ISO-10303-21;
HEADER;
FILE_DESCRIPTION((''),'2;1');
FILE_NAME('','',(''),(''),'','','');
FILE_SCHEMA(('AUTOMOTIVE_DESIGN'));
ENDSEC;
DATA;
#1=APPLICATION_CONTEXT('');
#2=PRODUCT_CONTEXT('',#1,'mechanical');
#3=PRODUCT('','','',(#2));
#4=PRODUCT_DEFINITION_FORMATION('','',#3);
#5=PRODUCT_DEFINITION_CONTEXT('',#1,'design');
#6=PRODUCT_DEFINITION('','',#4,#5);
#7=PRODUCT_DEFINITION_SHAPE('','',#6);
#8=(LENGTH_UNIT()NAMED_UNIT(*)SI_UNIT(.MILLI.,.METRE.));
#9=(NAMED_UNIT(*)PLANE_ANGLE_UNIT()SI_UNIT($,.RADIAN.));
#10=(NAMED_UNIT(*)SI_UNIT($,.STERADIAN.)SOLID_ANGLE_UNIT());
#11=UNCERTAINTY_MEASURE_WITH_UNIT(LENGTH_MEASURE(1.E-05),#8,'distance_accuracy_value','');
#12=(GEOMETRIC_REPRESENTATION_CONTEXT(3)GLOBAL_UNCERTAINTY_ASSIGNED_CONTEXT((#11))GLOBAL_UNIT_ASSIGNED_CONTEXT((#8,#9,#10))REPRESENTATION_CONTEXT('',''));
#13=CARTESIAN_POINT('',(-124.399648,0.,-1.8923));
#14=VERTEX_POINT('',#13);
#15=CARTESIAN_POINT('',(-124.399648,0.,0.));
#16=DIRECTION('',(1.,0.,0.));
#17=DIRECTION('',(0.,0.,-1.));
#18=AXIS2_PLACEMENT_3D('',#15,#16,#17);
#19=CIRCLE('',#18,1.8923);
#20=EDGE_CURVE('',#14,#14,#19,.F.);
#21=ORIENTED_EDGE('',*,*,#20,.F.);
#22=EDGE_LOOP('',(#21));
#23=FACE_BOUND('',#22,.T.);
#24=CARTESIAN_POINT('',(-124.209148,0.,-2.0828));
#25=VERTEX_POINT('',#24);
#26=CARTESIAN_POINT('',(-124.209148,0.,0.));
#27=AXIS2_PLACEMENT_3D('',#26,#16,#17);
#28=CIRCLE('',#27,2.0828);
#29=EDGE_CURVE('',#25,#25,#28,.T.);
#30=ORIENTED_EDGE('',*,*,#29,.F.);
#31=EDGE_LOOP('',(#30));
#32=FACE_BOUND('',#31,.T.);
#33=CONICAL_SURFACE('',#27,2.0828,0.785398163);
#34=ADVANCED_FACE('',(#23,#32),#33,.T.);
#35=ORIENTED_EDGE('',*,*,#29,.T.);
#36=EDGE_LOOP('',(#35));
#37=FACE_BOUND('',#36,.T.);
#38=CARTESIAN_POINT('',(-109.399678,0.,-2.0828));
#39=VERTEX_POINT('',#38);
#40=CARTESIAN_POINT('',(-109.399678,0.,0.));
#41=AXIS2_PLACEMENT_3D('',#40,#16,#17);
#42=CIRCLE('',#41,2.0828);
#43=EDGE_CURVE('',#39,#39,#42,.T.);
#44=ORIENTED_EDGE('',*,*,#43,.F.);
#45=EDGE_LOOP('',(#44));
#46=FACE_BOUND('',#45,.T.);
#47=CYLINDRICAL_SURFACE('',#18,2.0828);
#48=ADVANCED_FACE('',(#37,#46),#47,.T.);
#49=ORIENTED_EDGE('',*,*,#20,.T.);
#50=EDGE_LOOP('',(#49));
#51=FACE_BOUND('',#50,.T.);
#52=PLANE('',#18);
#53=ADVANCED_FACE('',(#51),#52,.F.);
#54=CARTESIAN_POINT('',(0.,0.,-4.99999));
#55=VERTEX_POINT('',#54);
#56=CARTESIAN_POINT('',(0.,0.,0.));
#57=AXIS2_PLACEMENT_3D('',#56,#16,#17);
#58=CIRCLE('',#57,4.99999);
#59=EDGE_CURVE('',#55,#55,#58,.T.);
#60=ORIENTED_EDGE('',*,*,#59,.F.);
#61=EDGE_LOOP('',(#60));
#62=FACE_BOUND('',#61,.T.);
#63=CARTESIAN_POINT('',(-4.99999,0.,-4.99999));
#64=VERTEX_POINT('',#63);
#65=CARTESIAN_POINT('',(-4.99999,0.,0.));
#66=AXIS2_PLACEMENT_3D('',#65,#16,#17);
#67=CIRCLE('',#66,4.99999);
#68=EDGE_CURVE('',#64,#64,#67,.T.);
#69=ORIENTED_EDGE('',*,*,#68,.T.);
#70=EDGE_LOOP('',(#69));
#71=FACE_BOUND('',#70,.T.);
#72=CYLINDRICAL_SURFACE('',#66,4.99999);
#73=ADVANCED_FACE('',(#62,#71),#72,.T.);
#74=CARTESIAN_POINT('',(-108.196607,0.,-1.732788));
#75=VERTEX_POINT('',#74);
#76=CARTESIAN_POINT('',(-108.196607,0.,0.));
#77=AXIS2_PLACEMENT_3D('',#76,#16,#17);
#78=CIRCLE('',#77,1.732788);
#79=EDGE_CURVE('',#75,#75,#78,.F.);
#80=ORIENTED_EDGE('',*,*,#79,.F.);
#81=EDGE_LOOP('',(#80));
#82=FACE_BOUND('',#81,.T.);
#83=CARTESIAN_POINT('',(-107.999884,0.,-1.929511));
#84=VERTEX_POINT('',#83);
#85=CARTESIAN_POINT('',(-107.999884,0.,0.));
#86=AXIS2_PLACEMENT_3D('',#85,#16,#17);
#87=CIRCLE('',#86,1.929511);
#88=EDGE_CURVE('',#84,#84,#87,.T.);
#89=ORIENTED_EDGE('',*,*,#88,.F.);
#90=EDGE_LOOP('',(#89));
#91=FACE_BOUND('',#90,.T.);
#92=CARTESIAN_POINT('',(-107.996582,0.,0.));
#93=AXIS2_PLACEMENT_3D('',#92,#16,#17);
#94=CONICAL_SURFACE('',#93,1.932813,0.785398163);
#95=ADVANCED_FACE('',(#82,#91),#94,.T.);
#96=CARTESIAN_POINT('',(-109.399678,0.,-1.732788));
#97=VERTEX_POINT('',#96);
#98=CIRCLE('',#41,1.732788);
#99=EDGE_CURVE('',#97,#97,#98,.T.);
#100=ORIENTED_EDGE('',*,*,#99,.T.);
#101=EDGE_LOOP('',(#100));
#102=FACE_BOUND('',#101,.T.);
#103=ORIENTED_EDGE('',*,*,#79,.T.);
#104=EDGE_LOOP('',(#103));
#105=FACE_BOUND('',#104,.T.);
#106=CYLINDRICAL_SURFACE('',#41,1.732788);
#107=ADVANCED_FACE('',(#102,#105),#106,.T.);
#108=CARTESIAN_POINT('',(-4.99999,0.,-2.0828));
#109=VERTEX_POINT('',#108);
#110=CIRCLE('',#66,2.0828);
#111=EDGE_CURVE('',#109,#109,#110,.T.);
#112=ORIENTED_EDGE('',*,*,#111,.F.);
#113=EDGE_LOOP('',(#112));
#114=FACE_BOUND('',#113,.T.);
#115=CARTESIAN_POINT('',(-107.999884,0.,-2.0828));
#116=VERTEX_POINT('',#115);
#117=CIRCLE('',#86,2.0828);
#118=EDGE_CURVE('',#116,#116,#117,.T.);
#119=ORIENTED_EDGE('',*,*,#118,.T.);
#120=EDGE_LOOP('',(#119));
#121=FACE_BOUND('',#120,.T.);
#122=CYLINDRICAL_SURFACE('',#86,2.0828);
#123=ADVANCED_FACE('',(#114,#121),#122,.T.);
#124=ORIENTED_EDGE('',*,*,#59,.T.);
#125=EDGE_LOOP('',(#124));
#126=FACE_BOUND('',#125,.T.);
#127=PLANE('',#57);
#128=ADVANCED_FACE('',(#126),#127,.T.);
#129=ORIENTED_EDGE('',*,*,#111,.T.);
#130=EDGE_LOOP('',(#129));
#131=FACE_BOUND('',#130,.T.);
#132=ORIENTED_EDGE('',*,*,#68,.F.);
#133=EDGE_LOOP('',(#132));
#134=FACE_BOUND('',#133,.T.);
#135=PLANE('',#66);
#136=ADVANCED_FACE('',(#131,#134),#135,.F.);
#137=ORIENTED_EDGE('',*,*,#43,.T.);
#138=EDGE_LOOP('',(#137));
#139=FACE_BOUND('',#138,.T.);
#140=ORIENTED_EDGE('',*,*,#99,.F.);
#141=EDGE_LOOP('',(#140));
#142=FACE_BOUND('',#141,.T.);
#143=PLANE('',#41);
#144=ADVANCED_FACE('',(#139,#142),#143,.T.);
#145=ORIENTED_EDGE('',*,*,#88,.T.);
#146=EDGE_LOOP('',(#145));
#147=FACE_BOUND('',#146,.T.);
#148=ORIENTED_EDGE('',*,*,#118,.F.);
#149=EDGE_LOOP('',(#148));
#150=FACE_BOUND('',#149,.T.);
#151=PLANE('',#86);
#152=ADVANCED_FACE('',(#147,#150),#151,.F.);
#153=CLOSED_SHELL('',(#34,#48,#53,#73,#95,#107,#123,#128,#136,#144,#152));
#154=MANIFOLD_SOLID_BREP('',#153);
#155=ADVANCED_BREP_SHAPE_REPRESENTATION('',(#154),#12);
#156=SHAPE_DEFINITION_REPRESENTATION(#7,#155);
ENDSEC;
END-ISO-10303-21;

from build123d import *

# Parameters (mm, degrees)
SKETCH1_R           = 4.99999
SKETCH1_R_2         = 2.182749
SKETCH1_R_3         = 2.0828
SKETCH1_R_4         = 1.932813
SKETCH1_R_5         = 1.732788
BOSS_EXTRUDE2_DEPTH = 4.99999
SKETCH1_5_R         = 2.0828
BOSS_EXTRUDE3_DEPTH = 107.999884076
BOSS_EXTRUDE4_START = -107.999884
SKETCH1_6_R         = 1.932813
BOSS_EXTRUDE4_DEPTH = 0.199898
BOSS_EXTRUDE5_START = -108.199782
SKETCH1_7_R         = 1.732788
BOSS_EXTRUDE5_DEPTH = 1.199896
BOSS_EXTRUDE6_START = -109.399678
SKETCH1_8_R         = 2.0828
BOSS_EXTRUDE6_DEPTH = 14.99997
CHAMFER1_SIZE       = 0.2032
CHAMFER2_SIZE       = 0.1905


with BuildPart() as part:
    # Sketch1 → Boss-Extrude2 (new body)
    # profile 1 of 5: a face of its own
    with BuildSketch(Plane(origin=(0, 0, 0), x_dir=(0, 0, -1), z_dir=(1, 0, 0))):
        Circle(SKETCH1_R)
        Circle(SKETCH1_R_2, mode=Mode.SUBTRACT)
    # profile 2 of 5: a face of its own
    with BuildSketch(Plane(origin=(0, 0, 0), x_dir=(0, 0, -1), z_dir=(1, 0, 0))):
        Circle(SKETCH1_R_2)
        Circle(SKETCH1_R_3, mode=Mode.SUBTRACT)
    # profile 3 of 5: a face of its own
    with BuildSketch(Plane(origin=(0, 0, 0), x_dir=(0, 0, -1), z_dir=(1, 0, 0))):
        Circle(SKETCH1_R_3)
        Circle(SKETCH1_R_4, mode=Mode.SUBTRACT)
    # profile 4 of 5: a face of its own
    with BuildSketch(Plane(origin=(0, 0, 0), x_dir=(0, 0, -1), z_dir=(1, 0, 0))):
        Circle(SKETCH1_R_4)
        Circle(SKETCH1_R_5, mode=Mode.SUBTRACT)
    # profile 5 of 5: a face of its own
    with BuildSketch(Plane(origin=(0, 0, 0), x_dir=(0, 0, -1), z_dir=(1, 0, 0))):
        Circle(SKETCH1_R_5)
    extrude(amount=-BOSS_EXTRUDE2_DEPTH)

    # Sketch1<5> → Boss-Extrude3 (add)
    with BuildSketch(Plane(origin=(0, 0, 0), x_dir=(0, 0, -1), z_dir=(1, 0, 0))):
        Circle(SKETCH1_5_R)
    extrude(amount=-BOSS_EXTRUDE3_DEPTH)

    # Sketch1<6> → Boss-Extrude4 (add)
    with BuildSketch(Plane(origin=(0, 0, 0), x_dir=(0, 0, -1), z_dir=(1, 0, 0)).offset(BOSS_EXTRUDE4_START)):
        Circle(SKETCH1_6_R)
    extrude(amount=-BOSS_EXTRUDE4_DEPTH)

    # Sketch1<7> → Boss-Extrude5 (add)
    with BuildSketch(Plane(origin=(0, 0, 0), x_dir=(0, 0, -1), z_dir=(1, 0, 0)).offset(BOSS_EXTRUDE5_START)):
        Circle(SKETCH1_7_R)
    extrude(amount=-BOSS_EXTRUDE5_DEPTH)

    # Sketch1<8> → Boss-Extrude6 (add)
    with BuildSketch(Plane(origin=(0, 0, 0), x_dir=(0, 0, -1), z_dir=(1, 0, 0)).offset(BOSS_EXTRUDE6_START)):
        Circle(SKETCH1_8_R)
    extrude(amount=-BOSS_EXTRUDE6_DEPTH)

    # Chamfer1
    # the kernel refuses this chamfer: 0.2032 mm, written as the material it takes off along each edge
    with BuildSketch(Plane(origin=(-108.199782, 0, 0), x_dir=(0, 0, -1), z_dir=(0, -1, 0))) as chamfer1_piece_1_section:
        Polygon((1.932813 - CHAMFER1_SIZE, 0), (1.932813, CHAMFER1_SIZE), (1.932813, 0), align=None)
    chamfer1_piece_1 = revolve(axis=Axis((-108.199782, 0, 0), (1, 0, 0)), mode=Mode.PRIVATE)
    chamfer1_piece_1 = chamfer1_piece_1 - Plane(origin=(-108.102785336, 0, 0), x_dir=(0, 0, -1), z_dir=(1, 0, 0)) * Cylinder(1.732788, 8, mode=Mode.PRIVATE)
    chamfer1_piece_1 = split(chamfer1_piece_1, bisect_by=Plane(origin=(-107.999884076, 0, 1.83568926), z_dir=(-1, 0, 0)), keep=Keep.TOP, mode=Mode.PRIVATE)
    add(chamfer1_piece_1, mode=Mode.SUBTRACT)

    # Chamfer2
    chamfer2_edges = [part.edges().sort_by_distance(p)[0] for p in [
        (-124.399648, 0, 2.0828),
    ]]
    chamfer(chamfer2_edges, length=CHAMFER2_SIZE)


solid = part.part
